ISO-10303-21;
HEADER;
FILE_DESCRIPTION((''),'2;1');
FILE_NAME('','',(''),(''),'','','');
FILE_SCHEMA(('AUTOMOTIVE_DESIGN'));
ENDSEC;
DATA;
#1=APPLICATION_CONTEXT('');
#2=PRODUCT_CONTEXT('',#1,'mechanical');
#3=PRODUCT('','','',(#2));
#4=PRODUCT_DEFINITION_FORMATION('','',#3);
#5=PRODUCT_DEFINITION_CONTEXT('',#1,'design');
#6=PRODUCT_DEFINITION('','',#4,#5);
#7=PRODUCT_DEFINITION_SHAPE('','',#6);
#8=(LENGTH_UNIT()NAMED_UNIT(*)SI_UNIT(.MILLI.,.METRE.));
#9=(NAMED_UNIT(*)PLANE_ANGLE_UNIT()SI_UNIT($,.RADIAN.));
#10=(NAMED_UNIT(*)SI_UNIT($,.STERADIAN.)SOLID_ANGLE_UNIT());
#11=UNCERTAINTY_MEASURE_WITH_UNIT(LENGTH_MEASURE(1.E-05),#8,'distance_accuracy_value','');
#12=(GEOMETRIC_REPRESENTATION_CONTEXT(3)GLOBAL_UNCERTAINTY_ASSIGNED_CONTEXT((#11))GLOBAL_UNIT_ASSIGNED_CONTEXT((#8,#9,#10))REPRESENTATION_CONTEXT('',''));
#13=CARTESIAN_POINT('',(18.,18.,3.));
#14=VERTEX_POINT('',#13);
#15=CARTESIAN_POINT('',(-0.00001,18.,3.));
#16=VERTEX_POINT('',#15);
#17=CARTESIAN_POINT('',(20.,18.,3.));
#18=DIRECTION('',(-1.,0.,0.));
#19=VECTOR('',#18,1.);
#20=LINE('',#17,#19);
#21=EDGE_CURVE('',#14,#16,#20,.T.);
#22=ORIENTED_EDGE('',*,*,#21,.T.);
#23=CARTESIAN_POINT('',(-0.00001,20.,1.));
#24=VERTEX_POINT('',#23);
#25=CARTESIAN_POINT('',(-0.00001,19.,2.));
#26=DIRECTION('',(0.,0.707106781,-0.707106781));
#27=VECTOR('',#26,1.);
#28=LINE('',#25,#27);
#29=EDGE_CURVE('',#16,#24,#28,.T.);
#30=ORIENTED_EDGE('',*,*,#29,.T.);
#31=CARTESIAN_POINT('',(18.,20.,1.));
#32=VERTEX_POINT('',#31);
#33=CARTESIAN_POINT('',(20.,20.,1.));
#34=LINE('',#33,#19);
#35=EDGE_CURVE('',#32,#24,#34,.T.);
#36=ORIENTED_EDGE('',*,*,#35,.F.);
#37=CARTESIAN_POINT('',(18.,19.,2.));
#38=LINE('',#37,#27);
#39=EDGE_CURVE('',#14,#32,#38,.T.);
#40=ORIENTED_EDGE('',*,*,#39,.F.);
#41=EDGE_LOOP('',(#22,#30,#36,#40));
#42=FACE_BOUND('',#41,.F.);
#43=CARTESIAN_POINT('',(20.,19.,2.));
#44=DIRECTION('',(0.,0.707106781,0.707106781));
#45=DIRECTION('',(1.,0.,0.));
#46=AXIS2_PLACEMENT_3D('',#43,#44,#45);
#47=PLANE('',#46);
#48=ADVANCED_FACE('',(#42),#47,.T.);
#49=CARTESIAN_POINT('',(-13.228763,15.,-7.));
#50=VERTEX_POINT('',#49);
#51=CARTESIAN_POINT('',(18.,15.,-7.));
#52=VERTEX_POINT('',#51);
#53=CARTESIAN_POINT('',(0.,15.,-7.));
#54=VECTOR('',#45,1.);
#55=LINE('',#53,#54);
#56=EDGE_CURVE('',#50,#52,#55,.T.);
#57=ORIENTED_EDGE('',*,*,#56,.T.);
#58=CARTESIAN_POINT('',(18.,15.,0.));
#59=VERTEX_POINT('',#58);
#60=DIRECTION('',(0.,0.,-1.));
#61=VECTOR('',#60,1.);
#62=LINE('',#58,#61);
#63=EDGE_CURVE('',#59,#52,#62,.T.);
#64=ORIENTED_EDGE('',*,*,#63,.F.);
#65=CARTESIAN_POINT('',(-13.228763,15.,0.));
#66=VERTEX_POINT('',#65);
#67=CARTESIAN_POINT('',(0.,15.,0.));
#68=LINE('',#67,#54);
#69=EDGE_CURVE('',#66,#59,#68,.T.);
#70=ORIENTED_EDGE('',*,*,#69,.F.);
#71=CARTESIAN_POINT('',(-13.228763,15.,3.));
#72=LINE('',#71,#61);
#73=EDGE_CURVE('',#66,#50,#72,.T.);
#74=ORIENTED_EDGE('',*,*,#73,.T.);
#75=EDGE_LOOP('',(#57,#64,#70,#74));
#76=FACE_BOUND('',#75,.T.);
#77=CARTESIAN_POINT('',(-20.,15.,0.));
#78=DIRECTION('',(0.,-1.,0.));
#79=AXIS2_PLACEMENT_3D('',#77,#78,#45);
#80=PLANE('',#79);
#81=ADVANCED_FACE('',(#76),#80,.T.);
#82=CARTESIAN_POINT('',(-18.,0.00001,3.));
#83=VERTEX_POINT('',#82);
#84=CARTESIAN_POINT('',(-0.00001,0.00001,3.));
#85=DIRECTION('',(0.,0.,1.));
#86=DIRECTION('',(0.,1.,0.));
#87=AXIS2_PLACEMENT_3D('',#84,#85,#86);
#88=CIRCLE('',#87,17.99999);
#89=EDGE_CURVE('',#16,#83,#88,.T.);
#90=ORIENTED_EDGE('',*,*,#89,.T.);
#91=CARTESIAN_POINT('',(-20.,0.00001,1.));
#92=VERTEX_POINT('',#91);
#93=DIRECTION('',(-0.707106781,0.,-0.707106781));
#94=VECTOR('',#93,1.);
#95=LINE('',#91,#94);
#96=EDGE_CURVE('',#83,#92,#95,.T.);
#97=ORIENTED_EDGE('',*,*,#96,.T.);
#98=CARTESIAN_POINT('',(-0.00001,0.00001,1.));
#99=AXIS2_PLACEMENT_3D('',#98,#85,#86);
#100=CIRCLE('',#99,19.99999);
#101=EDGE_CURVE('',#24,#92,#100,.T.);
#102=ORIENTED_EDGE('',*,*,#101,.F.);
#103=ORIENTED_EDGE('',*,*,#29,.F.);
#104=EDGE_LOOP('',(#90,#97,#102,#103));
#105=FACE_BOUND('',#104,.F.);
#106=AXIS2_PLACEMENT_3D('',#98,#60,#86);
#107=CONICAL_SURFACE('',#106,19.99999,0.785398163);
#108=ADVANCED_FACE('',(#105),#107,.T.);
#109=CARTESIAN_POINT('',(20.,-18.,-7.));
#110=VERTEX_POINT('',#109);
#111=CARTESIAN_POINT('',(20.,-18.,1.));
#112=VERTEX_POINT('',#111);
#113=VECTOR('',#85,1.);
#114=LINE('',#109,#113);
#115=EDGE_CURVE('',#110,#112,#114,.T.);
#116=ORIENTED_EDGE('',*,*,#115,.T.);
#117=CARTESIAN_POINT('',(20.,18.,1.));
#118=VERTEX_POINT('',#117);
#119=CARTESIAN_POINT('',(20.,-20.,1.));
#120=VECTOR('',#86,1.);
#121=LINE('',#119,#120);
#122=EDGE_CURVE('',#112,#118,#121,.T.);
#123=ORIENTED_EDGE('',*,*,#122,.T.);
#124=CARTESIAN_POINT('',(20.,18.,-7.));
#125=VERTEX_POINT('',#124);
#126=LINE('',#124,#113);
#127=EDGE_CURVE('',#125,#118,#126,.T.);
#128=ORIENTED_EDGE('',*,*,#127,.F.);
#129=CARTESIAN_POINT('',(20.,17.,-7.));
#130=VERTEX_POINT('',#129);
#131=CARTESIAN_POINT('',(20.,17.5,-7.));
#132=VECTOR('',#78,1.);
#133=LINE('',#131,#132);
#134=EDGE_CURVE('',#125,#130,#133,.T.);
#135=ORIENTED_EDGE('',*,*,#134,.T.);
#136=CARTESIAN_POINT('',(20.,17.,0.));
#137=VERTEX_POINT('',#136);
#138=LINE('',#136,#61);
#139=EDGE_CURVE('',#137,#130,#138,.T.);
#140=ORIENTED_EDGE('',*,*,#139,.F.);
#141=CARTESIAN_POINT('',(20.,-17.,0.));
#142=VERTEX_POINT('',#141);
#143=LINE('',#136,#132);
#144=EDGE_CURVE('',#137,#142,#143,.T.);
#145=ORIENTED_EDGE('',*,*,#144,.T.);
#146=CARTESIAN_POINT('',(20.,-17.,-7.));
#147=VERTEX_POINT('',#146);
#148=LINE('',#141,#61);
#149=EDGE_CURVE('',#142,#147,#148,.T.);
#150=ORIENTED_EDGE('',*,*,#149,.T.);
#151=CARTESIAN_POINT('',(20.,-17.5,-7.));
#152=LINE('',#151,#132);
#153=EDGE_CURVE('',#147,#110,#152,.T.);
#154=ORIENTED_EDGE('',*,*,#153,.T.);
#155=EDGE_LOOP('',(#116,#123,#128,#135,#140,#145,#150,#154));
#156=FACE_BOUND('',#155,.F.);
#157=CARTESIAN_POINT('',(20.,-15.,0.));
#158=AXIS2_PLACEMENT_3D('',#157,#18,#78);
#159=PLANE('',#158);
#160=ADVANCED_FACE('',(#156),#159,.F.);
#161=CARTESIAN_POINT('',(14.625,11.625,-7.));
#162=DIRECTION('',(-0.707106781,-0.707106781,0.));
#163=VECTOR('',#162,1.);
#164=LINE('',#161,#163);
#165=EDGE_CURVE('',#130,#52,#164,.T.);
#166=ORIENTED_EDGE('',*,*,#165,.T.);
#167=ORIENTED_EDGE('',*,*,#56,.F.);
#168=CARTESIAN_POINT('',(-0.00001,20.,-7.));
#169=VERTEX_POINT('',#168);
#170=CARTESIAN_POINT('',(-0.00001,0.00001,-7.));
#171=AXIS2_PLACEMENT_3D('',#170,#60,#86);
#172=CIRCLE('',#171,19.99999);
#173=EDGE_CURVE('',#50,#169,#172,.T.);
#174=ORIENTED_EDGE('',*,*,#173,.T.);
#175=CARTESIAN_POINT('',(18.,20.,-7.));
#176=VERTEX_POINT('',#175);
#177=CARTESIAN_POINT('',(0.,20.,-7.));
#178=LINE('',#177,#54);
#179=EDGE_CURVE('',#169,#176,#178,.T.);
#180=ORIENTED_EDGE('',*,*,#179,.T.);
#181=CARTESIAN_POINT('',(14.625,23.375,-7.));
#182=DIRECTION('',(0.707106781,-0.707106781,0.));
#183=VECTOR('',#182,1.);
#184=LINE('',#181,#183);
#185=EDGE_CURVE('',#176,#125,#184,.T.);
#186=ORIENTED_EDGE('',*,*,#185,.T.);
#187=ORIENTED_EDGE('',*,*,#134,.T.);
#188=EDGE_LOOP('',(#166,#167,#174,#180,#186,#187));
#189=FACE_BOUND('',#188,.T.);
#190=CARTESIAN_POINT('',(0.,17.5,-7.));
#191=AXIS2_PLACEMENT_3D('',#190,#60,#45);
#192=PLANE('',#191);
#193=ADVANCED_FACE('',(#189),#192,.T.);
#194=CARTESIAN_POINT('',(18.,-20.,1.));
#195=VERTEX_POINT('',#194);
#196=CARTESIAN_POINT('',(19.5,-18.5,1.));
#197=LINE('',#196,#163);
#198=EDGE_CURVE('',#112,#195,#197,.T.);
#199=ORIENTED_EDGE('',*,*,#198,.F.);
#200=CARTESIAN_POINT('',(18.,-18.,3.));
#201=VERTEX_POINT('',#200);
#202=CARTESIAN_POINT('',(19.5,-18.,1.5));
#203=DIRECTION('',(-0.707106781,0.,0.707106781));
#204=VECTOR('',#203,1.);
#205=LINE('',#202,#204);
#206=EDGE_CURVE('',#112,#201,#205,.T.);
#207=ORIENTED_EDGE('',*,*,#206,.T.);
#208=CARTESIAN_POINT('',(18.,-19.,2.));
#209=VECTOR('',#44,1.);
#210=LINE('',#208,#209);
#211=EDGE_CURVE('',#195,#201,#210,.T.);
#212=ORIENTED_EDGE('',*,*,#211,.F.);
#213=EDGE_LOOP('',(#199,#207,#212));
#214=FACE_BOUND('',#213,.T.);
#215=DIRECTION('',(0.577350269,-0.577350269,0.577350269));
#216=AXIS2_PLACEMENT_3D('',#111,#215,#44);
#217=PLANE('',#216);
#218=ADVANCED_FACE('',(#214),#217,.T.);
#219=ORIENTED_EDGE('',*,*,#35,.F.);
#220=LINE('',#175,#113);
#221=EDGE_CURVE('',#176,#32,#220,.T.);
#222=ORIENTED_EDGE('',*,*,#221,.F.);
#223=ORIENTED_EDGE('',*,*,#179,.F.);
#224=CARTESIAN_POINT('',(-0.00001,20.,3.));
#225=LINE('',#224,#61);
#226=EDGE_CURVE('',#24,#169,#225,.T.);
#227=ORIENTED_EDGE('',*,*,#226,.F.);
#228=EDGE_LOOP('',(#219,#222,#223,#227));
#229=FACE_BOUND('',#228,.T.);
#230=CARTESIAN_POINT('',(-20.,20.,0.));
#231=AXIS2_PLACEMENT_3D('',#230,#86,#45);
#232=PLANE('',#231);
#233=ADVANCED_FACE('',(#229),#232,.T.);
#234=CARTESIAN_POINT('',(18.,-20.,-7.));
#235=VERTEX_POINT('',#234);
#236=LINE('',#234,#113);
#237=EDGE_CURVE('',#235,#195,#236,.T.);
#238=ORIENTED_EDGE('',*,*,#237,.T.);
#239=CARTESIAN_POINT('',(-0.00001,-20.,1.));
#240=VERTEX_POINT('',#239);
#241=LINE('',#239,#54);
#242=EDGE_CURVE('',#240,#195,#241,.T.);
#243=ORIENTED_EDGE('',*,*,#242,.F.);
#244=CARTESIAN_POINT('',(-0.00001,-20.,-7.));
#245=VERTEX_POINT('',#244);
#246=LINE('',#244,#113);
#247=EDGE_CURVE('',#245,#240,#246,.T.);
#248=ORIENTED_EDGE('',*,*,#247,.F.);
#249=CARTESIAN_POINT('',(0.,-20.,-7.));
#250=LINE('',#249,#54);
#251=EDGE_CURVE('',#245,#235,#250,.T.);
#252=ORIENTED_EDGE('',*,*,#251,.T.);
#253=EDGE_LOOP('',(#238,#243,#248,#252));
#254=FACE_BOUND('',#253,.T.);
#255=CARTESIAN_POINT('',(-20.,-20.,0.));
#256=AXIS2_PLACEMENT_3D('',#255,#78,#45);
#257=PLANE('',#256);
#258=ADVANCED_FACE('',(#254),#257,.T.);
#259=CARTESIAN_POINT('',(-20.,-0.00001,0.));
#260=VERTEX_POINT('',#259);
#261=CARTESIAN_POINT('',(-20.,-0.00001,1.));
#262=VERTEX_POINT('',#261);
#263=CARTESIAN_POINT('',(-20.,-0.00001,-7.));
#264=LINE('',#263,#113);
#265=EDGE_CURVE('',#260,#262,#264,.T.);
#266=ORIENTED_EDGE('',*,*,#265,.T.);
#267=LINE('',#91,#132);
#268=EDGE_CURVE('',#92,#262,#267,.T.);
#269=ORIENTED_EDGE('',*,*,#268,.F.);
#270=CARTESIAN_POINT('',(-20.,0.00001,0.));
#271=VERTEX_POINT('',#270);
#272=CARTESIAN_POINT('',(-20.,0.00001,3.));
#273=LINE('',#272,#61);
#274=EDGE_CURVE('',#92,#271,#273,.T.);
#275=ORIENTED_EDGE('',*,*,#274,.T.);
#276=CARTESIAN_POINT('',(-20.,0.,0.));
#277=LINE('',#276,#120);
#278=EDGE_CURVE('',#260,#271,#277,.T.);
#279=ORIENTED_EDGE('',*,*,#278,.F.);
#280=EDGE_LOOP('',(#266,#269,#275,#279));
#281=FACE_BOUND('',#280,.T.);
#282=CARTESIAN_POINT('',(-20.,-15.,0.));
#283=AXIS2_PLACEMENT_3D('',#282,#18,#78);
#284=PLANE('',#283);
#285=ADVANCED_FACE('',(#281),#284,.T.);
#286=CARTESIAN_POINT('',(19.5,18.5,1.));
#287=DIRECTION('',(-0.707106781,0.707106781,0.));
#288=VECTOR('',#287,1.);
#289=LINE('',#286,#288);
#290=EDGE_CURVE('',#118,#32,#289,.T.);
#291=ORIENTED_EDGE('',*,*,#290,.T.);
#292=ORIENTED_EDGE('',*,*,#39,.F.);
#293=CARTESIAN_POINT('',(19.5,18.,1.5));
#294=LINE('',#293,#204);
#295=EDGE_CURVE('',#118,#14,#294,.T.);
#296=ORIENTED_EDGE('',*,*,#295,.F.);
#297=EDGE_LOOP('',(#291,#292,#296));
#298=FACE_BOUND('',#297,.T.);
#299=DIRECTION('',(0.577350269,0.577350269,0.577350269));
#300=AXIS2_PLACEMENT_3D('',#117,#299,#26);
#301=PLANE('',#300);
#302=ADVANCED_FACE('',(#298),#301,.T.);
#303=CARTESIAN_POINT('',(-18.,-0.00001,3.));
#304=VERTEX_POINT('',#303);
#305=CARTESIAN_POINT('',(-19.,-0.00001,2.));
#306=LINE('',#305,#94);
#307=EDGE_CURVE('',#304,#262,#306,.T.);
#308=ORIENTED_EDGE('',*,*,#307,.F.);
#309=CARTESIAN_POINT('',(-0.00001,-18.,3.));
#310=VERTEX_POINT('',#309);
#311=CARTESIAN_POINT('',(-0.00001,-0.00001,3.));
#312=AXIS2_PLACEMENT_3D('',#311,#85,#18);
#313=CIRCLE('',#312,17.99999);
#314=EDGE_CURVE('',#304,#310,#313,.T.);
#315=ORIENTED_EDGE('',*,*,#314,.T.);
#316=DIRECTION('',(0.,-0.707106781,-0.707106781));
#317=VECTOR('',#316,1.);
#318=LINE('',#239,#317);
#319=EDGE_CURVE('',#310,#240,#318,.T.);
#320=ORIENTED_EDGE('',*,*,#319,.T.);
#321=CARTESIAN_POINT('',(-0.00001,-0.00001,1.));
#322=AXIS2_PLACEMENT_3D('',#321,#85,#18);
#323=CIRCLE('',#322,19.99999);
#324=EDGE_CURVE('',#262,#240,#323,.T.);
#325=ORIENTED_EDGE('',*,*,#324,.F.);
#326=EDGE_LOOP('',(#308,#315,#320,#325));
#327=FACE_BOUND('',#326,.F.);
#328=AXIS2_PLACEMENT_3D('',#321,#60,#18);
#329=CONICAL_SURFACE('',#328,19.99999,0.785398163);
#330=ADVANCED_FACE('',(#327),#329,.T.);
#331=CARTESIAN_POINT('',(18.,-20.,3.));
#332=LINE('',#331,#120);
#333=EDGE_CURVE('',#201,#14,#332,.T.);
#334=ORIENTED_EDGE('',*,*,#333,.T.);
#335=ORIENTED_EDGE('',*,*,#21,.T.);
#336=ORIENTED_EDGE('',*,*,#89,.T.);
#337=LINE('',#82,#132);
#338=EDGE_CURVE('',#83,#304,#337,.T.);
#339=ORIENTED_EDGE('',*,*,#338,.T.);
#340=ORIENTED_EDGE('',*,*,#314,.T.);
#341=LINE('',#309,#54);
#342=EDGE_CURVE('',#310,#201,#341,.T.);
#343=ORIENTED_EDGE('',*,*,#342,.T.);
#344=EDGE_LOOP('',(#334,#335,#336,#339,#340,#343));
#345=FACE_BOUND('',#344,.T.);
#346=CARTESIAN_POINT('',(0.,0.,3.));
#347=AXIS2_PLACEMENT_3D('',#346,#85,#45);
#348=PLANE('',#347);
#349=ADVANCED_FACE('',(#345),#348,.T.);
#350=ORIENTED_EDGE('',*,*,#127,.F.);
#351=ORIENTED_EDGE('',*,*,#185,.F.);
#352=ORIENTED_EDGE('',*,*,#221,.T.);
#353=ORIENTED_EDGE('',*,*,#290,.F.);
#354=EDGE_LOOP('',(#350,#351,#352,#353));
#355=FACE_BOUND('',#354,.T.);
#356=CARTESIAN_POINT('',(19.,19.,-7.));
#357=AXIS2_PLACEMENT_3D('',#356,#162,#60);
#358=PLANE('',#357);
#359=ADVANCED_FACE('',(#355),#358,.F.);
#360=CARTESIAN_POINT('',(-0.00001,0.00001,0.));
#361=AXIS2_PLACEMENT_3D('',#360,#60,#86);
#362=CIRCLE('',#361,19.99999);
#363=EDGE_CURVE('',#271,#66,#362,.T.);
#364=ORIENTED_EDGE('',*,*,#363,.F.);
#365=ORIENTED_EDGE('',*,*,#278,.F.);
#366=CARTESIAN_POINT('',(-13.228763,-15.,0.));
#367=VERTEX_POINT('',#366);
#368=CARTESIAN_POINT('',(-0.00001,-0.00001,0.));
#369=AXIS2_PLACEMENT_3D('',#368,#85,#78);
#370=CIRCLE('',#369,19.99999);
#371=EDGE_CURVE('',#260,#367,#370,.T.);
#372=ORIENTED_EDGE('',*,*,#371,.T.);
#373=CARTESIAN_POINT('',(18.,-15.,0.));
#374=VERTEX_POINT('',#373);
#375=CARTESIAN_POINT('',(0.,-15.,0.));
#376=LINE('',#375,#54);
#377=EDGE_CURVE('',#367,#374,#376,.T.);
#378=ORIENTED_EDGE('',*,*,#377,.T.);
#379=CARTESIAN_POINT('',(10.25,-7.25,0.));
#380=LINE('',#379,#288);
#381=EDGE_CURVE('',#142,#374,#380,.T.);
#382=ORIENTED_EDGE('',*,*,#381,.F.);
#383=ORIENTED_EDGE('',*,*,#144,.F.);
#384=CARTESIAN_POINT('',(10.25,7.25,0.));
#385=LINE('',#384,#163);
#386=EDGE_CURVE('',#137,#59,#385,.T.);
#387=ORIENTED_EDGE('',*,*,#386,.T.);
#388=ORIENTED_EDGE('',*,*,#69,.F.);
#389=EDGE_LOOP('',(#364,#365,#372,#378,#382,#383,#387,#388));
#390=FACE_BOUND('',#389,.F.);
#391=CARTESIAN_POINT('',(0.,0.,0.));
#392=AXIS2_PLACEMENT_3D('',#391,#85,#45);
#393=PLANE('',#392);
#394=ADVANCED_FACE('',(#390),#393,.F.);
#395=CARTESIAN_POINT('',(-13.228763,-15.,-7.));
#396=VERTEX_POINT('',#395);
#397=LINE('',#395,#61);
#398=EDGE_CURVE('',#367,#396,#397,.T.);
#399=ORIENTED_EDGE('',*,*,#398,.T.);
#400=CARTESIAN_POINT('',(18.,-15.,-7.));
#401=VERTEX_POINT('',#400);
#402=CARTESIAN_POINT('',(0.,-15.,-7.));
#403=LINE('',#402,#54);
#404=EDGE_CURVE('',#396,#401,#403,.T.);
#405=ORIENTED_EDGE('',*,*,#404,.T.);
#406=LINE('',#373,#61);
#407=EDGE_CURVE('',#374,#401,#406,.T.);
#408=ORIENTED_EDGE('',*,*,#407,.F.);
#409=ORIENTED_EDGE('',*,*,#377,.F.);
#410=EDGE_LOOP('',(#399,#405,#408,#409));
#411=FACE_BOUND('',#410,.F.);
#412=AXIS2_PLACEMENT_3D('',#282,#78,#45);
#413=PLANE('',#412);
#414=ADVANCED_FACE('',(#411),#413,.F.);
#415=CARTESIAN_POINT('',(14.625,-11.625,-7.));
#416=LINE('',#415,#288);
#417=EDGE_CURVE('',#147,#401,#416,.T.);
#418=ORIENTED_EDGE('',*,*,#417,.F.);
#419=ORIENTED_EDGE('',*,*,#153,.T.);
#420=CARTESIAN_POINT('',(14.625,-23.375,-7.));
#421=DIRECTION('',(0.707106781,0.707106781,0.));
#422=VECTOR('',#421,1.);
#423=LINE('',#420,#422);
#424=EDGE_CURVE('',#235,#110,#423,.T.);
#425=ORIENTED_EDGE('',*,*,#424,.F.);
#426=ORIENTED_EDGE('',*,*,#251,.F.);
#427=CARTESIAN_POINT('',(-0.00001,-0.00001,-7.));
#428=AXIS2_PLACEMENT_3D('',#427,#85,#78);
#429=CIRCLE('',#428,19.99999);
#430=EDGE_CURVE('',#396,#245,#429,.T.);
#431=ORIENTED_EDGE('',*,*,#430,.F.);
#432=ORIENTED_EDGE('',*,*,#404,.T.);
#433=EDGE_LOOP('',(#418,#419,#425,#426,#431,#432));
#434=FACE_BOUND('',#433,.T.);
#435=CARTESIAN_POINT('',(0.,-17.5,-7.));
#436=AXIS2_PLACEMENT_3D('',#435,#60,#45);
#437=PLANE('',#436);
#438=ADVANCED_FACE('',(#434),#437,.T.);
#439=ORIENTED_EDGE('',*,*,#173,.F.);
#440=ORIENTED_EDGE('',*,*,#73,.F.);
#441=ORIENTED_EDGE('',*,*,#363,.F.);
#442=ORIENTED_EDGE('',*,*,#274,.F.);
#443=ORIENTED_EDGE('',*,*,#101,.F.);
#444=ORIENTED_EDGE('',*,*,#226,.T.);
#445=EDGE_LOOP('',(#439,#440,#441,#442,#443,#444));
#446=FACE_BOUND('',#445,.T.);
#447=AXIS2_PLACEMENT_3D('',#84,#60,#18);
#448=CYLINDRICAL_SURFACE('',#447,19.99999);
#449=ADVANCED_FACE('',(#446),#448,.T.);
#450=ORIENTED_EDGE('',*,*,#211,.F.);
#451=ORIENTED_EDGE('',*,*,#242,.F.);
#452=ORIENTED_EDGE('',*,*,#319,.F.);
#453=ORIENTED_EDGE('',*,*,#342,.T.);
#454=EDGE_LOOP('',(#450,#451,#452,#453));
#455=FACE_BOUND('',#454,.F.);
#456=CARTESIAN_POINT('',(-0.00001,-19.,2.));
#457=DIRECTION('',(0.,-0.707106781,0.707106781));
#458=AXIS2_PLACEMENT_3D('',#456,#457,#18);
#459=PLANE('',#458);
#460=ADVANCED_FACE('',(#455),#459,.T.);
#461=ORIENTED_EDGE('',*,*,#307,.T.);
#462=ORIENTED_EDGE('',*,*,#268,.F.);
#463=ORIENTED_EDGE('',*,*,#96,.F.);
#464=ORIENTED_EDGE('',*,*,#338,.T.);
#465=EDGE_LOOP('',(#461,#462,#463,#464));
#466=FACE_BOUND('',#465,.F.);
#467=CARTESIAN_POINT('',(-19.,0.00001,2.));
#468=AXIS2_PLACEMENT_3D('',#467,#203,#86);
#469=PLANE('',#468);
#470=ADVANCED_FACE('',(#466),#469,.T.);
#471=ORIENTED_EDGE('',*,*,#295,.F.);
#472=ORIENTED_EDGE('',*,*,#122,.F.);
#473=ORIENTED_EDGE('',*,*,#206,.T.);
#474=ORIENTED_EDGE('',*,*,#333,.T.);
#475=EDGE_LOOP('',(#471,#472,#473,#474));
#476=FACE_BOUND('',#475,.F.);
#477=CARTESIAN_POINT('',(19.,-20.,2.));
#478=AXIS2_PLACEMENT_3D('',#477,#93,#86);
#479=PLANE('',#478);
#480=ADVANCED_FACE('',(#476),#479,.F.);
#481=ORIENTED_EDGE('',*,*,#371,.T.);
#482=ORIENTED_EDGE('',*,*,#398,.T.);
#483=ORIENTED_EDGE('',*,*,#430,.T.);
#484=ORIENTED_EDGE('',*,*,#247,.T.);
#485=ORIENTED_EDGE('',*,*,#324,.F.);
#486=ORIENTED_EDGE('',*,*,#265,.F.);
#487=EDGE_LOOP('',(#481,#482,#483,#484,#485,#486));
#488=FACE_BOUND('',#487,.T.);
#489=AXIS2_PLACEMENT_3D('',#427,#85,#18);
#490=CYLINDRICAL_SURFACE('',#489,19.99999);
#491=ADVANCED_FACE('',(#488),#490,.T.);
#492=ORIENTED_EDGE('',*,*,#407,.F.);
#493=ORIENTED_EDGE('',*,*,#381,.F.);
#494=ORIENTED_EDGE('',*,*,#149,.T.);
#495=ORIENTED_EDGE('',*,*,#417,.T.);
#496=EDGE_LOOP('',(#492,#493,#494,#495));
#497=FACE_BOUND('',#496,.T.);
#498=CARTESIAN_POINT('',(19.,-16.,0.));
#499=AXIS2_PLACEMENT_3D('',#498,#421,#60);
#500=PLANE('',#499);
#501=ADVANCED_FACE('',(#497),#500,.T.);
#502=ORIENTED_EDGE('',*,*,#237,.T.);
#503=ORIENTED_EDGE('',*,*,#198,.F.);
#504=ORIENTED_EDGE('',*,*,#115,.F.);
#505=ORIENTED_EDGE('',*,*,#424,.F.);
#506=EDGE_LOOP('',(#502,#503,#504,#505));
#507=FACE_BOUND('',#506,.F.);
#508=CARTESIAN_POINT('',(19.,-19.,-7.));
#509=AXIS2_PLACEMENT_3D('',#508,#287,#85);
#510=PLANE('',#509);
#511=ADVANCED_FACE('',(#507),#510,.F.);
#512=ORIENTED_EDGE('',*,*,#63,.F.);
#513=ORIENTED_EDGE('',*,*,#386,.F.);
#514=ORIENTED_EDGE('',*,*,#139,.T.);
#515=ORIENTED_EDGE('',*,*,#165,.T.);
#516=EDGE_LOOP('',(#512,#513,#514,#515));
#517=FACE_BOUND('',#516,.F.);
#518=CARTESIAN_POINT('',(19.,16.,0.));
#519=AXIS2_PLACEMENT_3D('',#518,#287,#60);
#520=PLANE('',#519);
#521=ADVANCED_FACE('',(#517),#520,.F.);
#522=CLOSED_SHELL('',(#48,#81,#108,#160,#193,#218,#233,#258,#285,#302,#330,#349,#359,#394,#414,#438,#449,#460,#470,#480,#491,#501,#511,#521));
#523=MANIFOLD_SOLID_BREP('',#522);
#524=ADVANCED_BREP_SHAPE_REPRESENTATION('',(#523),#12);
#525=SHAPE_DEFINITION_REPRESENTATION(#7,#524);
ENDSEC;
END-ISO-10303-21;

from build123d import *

# Parameters (mm, degrees)
F0_W     = 40
F0_H     = 40
F1_DEPTH = 3
F2_W     = 40
F2_H     = 5
F3_DEPTH = 7
F4_R     = 19.99999
F5_SIZE  = 2


# Not quite as in the source:
# - a fillet or chamfer is up to 0.001 mm smaller than in the source, because OpenCascade refuses the exact size


with BuildPart() as f1:
    # F0 (on Top) → F1 (new body)
    with BuildSketch(Plane.XY):
        Rectangle(F0_W, F0_H)
    extrude(amount=F1_DEPTH)

    # F2 (on face) → F3 (join)
    with BuildSketch(Plane(origin=(0, 0, 0), x_dir=(1, 0, 0), z_dir=(0, 0, -1))):
        with Locations((0, 17.5)):
            Rectangle(F2_W, F2_H)
        with Locations((0, -17.5)):
            Rectangle(F2_W, F2_H)
    extrude(amount=F3_DEPTH)

    # F4 (radius 20 in the source; OpenCascade refuses exactly that, so slightly less here)
    f4_edges = [f1.edges().sort_by_distance(p)[0] for p in [
        (-20, 20, -2),
        (-20, -20, -2),
    ]]
    fillet(f4_edges, radius=F4_R)

    # F5
    f5_edges = [f1.edges().sort_by_distance(p)[0] for p in [
        (-14.142139, -14.142139, 3),
        (20, -20, -2),
        (20, 0, 3),
        (20, 20, -2),
        (20, 15, -3.5),
        (20, -15, -3.5),
    ]]
    chamfer(f5_edges, length=F5_SIZE)


solid = f1.part
